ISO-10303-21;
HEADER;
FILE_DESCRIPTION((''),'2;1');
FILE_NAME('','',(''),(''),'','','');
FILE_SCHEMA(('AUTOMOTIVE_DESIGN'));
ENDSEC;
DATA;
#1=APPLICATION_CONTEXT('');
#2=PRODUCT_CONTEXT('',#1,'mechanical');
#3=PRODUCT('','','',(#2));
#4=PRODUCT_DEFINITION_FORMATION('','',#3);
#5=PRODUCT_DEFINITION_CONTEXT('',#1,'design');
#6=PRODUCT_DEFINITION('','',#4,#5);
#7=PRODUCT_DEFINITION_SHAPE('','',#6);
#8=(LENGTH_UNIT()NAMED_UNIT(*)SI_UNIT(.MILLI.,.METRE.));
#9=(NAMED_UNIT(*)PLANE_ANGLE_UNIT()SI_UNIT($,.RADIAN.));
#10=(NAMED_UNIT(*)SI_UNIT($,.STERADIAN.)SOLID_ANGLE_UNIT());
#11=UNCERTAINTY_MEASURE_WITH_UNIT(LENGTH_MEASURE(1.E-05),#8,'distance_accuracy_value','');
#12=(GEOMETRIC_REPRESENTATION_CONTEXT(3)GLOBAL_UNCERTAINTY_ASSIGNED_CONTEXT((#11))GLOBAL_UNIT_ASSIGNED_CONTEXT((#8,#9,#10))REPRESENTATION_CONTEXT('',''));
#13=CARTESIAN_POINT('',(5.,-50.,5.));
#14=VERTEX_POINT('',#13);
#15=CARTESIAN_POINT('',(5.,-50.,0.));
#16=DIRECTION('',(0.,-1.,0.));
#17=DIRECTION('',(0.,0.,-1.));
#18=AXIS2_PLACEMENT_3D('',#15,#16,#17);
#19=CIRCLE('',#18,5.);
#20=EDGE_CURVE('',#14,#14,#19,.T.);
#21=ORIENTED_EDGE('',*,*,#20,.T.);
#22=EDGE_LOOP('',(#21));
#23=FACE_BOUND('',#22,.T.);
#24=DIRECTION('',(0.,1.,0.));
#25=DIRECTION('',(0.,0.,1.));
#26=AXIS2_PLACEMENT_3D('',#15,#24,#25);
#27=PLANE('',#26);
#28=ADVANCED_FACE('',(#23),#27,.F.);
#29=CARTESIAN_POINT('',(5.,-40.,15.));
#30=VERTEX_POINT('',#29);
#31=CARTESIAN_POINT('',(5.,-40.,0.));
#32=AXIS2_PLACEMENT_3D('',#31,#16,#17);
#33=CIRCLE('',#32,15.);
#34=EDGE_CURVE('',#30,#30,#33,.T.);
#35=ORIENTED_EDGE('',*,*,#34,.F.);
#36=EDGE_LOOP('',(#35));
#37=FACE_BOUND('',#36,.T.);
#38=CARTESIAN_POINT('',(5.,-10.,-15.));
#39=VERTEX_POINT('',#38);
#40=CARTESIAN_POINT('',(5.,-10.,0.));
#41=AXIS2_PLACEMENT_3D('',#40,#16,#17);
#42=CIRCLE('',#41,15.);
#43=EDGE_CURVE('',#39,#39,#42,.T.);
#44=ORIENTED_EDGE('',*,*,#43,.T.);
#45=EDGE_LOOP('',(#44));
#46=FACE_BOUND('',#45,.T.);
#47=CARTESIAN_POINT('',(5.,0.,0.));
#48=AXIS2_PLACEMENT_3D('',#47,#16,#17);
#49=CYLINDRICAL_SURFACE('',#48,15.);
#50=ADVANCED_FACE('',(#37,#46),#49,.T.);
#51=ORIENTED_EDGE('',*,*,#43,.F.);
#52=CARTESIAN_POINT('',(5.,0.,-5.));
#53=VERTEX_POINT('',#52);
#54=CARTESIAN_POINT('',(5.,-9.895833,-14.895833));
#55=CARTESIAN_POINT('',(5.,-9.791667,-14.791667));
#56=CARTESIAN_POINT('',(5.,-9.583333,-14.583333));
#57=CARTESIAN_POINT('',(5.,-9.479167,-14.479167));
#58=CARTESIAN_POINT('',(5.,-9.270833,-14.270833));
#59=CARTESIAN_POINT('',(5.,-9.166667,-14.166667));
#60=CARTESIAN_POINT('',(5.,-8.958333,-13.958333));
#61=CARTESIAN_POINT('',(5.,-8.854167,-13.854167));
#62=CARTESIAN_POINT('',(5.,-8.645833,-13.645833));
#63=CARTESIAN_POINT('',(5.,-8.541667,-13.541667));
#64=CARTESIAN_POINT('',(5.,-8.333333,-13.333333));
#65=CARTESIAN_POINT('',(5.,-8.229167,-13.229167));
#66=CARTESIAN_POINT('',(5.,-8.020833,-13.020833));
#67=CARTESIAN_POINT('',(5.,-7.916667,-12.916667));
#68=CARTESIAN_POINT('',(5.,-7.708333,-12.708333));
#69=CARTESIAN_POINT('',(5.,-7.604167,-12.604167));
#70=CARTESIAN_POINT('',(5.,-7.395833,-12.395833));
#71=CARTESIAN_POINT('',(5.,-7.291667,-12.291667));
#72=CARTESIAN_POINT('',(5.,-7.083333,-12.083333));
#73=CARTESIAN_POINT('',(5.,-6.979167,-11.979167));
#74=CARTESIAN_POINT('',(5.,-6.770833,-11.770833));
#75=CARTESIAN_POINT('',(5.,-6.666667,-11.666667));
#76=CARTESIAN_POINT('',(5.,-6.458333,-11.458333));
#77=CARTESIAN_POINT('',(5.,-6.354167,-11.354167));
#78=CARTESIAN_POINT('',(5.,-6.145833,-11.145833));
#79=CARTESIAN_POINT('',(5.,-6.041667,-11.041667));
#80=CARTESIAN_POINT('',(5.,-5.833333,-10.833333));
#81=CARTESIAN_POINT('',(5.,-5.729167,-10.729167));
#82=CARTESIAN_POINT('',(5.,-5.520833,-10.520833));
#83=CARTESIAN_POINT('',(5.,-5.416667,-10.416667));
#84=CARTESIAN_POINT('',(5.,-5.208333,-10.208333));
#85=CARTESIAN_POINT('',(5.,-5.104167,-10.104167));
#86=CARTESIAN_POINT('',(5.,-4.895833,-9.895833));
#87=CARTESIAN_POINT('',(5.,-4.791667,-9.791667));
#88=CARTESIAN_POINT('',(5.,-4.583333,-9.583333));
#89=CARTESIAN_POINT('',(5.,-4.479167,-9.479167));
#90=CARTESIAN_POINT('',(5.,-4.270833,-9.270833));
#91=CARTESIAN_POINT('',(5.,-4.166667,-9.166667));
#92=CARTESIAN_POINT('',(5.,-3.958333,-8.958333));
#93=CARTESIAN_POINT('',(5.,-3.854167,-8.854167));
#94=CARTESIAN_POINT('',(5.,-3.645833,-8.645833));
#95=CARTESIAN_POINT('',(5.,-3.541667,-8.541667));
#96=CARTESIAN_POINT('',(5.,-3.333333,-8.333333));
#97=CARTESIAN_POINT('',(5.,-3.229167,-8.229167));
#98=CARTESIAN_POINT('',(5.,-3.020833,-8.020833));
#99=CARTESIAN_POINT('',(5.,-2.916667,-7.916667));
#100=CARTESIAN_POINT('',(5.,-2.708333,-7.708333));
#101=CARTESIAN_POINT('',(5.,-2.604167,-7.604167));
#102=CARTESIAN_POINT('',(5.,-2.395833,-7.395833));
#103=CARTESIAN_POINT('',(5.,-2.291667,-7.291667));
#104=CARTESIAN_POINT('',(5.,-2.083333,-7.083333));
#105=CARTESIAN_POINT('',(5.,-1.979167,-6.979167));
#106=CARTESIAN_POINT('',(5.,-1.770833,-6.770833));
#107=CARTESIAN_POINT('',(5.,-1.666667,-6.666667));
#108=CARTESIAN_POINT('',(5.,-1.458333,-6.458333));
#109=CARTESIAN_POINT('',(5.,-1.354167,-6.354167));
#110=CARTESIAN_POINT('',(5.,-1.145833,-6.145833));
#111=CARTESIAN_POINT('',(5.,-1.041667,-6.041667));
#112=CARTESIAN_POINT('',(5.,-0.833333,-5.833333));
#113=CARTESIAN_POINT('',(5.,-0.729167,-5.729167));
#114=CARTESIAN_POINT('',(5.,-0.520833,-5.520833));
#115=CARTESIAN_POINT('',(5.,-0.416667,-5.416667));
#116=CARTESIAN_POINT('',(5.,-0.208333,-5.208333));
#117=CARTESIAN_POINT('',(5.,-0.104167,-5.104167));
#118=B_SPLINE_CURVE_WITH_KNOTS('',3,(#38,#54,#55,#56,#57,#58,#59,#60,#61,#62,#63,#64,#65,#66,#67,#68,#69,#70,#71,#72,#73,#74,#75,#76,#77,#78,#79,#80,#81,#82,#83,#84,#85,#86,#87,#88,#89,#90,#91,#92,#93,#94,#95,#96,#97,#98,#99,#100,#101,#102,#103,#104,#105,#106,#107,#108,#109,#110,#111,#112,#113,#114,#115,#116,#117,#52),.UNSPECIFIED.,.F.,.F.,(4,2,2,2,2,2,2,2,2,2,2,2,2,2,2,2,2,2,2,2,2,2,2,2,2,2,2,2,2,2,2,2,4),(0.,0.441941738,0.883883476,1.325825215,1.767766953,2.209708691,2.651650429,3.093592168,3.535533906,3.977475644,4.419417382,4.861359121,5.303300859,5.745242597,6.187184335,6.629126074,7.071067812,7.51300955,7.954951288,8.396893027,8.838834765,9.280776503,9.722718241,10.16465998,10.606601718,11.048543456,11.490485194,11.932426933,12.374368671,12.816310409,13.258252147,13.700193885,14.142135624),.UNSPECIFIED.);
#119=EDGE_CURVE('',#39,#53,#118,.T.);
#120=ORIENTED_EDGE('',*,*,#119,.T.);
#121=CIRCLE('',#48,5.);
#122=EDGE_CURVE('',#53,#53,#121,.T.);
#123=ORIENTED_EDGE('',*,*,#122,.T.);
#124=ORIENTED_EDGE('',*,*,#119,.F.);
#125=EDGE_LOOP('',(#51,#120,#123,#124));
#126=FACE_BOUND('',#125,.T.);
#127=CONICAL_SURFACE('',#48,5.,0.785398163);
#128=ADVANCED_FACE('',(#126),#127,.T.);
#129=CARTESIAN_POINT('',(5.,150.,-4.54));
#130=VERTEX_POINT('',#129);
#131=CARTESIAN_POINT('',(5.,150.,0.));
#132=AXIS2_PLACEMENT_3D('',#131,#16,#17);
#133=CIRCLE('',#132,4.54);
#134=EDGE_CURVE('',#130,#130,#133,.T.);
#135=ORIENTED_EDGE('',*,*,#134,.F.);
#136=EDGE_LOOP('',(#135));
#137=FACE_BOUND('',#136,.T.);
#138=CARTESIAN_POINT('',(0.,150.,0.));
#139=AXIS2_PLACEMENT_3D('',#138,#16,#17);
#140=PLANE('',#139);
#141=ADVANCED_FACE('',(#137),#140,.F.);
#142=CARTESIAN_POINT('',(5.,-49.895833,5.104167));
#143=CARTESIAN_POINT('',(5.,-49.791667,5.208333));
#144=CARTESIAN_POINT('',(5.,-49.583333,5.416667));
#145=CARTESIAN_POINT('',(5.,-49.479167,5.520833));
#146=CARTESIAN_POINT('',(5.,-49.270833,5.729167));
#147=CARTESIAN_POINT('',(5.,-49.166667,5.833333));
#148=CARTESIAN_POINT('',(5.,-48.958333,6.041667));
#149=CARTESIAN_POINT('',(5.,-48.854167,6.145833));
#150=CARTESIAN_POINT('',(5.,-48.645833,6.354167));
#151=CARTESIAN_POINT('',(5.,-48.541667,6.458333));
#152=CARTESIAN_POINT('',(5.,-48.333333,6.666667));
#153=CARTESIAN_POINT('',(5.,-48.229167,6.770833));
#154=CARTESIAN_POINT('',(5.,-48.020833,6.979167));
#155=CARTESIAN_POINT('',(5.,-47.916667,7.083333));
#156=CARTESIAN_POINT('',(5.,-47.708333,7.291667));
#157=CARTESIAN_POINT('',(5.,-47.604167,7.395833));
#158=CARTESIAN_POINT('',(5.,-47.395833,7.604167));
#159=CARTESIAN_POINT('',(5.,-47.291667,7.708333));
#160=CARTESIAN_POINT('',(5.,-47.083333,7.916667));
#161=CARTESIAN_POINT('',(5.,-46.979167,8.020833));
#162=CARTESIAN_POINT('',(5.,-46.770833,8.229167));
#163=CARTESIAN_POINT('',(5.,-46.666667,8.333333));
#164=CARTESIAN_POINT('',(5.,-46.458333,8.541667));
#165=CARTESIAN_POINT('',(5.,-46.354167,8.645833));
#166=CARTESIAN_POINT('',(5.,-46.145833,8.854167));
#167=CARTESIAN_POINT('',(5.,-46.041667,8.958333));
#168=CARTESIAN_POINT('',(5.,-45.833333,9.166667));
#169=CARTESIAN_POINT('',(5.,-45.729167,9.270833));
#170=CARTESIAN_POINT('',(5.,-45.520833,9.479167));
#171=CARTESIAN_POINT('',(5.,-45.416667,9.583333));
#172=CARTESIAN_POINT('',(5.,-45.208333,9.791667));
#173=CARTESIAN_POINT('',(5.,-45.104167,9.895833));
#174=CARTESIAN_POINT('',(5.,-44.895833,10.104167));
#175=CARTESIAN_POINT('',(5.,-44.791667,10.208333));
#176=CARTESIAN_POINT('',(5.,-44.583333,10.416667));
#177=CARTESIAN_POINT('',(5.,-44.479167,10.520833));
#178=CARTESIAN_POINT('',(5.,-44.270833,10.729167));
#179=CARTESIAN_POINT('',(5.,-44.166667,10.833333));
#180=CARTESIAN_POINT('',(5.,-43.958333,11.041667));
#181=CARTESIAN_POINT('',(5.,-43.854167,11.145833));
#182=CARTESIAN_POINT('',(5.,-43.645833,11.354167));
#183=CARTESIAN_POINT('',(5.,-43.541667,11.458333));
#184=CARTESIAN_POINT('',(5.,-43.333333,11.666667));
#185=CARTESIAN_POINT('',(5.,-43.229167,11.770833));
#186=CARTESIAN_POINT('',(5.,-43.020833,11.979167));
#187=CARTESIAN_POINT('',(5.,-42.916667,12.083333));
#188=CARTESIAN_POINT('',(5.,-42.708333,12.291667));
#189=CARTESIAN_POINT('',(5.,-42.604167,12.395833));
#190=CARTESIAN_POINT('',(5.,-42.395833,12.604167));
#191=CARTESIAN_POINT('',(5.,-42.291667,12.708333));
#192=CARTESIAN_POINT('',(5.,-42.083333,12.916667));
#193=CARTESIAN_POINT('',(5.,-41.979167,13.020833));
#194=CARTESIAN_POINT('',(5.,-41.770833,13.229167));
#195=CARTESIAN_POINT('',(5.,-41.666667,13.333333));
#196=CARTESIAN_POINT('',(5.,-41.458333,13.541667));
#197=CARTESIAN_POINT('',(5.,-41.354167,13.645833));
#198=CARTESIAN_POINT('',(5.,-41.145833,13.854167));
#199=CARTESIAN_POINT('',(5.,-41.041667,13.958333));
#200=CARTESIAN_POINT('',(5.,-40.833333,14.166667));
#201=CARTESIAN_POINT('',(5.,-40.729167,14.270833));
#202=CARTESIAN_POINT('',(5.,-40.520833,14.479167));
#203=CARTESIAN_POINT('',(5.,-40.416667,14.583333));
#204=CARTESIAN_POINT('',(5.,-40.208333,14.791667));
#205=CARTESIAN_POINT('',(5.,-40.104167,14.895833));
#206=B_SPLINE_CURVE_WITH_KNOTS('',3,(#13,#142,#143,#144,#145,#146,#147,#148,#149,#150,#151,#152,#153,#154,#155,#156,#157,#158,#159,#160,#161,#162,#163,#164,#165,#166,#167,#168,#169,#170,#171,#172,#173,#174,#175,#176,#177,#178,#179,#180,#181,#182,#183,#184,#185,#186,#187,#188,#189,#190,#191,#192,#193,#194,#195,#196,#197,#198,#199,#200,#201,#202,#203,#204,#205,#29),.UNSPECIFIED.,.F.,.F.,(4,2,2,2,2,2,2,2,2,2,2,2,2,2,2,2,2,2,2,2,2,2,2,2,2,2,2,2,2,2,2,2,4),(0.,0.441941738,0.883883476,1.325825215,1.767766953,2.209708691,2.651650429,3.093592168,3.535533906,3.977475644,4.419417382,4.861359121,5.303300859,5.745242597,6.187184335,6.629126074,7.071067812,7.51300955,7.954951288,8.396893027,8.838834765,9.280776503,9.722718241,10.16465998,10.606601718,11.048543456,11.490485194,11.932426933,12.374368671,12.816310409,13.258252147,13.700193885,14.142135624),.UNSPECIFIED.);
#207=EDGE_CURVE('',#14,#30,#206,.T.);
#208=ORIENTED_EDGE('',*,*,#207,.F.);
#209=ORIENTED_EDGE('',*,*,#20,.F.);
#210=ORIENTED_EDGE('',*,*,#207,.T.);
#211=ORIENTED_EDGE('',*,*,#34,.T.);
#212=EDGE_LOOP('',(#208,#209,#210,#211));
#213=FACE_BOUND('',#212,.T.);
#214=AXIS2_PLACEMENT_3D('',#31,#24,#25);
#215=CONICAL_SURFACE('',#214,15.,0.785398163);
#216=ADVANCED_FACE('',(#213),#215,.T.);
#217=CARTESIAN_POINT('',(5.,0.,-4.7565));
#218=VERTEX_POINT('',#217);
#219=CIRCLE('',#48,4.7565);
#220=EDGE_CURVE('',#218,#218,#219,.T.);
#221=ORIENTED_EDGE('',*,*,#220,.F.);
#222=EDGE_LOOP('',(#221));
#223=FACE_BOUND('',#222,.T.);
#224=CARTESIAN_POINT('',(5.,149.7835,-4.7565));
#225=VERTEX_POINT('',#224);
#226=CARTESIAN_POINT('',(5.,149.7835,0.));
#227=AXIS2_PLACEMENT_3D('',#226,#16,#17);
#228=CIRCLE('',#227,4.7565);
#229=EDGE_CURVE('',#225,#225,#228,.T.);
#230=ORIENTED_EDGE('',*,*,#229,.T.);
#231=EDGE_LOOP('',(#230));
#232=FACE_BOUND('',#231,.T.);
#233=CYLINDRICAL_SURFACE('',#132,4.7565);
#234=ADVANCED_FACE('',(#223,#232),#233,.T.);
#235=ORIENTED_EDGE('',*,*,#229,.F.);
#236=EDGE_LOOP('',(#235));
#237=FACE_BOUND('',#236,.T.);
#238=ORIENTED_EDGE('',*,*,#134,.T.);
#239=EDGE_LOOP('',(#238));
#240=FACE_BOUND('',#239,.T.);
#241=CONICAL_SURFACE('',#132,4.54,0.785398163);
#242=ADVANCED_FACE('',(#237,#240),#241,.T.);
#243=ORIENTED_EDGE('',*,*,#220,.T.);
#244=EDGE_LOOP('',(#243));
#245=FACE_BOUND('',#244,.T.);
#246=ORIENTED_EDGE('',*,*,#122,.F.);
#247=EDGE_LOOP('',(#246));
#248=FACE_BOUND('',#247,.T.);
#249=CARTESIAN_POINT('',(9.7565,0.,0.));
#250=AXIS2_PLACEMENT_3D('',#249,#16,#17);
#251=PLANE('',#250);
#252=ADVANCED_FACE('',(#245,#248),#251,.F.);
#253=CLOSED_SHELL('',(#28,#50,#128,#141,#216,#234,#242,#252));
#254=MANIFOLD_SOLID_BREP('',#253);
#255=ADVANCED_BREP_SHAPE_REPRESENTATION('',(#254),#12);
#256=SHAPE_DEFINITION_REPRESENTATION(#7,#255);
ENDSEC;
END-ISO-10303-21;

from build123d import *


# Read off the part's stored shape, not the designer's step: M10x0.75 Machine Threads Stud1
with BuildPart() as part:
    # Sketch1 → Revolve2 (revolve)
    with BuildSketch(Plane.XY, mode=Mode.PRIVATE) as revolve2_sk:
        Polygon((0, 0), (0, 150), (5, 150), (5, -50), (0, -50), (-10, -40), (-10, -10), align=None)
    revolve(revolve2_sk.sketch.rotate(Axis((5, 0, 0), (0, 1, 0)), 270), axis=Axis((5, 0, 0), (0, 1, 0)))

    # M10x0.75 Machine Threads Stud1 outline → M10x0.75 Machine Threads Stud1 (revolve, cut)
    with BuildSketch(Plane(origin=(5, 0, 0), x_dir=(1, 0, 0), z_dir=(0, 0, 1))):
        Polygon((5, 150), (4.54, 150), (4.7565, 149.7835), (4.7565, 0), (5, 0), align=None)
    revolve(axis=Axis((5, 0, 0), (0, 1, 0)), mode=Mode.SUBTRACT)


solid = part.part
